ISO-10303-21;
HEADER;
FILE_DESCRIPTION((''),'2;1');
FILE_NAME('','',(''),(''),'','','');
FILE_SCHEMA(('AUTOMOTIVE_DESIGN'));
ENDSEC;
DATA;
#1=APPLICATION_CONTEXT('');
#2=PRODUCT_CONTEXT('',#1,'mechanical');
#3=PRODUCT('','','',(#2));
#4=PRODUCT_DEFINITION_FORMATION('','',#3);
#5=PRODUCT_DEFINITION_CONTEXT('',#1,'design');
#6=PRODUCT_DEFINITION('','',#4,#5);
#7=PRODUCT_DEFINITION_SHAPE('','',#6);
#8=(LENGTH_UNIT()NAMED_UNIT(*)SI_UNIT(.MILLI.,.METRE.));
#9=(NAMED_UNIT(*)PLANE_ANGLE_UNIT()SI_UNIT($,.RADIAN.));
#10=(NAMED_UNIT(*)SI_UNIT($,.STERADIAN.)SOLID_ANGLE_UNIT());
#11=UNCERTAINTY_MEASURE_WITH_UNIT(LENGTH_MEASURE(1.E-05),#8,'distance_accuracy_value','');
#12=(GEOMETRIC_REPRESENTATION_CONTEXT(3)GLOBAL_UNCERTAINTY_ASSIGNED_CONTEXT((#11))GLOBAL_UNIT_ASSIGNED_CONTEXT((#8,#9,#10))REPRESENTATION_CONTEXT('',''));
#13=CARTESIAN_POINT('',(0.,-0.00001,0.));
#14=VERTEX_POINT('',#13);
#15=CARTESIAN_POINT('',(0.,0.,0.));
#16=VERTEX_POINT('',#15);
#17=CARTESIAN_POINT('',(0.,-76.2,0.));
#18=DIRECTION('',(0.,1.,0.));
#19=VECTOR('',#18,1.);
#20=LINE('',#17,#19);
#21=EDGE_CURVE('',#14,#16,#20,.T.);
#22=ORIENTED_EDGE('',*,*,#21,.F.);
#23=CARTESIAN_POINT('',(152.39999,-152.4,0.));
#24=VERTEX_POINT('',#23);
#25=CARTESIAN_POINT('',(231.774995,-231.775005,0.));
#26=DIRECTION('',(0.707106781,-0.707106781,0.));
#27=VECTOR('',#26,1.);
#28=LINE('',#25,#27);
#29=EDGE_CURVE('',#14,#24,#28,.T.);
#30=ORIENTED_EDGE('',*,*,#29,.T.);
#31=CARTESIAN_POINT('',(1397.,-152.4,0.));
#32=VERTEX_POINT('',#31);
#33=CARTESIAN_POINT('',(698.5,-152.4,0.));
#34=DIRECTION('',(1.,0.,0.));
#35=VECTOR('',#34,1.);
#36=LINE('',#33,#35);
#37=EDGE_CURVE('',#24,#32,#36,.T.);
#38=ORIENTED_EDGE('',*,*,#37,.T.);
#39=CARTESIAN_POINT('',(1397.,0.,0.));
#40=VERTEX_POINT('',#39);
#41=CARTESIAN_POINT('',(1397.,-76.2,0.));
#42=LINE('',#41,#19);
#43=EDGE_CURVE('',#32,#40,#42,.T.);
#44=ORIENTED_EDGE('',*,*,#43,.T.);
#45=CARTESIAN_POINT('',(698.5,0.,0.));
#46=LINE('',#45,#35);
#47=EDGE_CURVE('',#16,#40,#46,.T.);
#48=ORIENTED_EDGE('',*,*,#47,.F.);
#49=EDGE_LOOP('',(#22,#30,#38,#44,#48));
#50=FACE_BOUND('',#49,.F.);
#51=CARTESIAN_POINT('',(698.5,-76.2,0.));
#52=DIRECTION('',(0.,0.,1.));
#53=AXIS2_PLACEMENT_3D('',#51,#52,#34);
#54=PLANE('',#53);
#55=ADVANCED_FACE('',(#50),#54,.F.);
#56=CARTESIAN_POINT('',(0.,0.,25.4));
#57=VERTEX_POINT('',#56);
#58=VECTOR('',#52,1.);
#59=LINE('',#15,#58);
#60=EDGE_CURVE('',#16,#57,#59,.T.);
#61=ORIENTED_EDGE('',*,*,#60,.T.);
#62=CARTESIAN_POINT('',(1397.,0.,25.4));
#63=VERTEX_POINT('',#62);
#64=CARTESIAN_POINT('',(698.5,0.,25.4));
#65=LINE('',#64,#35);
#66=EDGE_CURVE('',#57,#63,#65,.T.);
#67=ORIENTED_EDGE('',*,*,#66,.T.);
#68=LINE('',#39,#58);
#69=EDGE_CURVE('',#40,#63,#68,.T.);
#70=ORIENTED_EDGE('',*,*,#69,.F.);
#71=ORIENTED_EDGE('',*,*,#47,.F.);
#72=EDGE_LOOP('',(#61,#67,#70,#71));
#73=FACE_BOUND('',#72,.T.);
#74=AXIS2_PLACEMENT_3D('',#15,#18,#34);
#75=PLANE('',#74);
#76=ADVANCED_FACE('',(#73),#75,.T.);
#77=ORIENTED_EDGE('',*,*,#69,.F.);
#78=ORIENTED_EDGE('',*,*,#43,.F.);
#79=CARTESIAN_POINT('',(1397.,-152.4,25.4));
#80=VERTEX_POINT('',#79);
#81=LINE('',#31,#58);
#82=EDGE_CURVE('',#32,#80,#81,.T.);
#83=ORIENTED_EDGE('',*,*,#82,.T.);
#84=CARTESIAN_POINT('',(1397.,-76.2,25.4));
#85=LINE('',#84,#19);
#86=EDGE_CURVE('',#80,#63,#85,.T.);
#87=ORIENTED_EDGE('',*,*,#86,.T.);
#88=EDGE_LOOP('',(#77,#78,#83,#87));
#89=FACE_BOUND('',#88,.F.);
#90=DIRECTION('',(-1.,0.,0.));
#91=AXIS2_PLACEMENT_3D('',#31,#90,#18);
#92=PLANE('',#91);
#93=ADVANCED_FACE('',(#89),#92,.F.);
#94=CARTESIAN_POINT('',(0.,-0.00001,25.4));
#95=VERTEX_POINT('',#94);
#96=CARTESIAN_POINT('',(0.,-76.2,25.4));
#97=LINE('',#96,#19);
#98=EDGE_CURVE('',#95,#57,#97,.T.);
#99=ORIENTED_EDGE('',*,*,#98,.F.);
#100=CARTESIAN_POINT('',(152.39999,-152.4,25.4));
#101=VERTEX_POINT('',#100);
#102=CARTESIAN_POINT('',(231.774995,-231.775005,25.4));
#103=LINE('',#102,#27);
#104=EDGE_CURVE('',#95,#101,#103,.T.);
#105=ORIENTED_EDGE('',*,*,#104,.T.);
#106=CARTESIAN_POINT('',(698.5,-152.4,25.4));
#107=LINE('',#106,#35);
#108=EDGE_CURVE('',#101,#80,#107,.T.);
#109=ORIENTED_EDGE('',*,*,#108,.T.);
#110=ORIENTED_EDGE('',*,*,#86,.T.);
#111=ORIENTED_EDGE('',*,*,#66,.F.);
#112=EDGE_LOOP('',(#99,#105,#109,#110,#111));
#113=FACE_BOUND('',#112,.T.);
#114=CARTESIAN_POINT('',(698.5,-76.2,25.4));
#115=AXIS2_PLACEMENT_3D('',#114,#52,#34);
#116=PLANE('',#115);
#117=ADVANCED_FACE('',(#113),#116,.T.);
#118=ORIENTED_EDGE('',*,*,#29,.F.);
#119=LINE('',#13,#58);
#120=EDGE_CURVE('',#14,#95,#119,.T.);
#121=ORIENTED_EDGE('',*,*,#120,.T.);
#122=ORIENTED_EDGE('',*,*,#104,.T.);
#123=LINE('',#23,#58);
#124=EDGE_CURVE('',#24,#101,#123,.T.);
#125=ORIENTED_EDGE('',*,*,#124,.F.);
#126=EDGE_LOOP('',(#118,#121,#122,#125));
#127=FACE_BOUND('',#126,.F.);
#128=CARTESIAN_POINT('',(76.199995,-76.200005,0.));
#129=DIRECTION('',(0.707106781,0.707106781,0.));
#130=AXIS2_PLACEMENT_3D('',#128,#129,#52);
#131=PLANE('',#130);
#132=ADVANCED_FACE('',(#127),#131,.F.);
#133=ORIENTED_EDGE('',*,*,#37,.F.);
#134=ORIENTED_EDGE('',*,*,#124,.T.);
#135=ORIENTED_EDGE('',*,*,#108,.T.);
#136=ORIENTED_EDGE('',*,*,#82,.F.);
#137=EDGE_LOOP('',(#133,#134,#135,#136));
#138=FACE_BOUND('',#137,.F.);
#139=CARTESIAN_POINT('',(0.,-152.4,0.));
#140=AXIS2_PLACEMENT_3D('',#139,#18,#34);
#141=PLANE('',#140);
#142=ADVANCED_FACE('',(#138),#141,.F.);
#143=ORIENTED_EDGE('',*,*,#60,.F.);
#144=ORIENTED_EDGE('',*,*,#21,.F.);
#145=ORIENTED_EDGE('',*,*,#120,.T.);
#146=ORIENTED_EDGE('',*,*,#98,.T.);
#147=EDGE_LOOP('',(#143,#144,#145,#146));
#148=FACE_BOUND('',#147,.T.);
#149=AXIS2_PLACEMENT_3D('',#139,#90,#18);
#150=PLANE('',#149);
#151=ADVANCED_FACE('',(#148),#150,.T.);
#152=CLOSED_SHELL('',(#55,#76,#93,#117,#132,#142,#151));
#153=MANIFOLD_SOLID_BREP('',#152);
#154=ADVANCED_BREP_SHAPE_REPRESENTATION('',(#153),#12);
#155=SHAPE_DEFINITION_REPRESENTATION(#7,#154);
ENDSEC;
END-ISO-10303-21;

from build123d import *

# Parameters (mm, degrees)
F0_W     = 1397
F0_H     = 152.4
F1_DEPTH = 25.4
F2_SIZE  = 152.39999


# Not quite as in the source:
# - a fillet or chamfer is up to 0.001 mm smaller than in the source, because OpenCascade refuses the exact size


with BuildPart() as f1:
    # F0 (on Top) → F1 (new body)
    with BuildSketch(Plane.XY):
        with Locations((698.5, -76.2)):
            Rectangle(F0_W, F0_H)
    extrude(amount=F1_DEPTH)

    # F2 (size 152.4 in the source; OpenCascade refuses exactly that, so slightly less here)
    f2_edges = [f1.edges().sort_by_distance(p)[0] for p in [
        (0, -152.4, 12.7),
    ]]
    chamfer(f2_edges, length=F2_SIZE)


solid = f1.part
